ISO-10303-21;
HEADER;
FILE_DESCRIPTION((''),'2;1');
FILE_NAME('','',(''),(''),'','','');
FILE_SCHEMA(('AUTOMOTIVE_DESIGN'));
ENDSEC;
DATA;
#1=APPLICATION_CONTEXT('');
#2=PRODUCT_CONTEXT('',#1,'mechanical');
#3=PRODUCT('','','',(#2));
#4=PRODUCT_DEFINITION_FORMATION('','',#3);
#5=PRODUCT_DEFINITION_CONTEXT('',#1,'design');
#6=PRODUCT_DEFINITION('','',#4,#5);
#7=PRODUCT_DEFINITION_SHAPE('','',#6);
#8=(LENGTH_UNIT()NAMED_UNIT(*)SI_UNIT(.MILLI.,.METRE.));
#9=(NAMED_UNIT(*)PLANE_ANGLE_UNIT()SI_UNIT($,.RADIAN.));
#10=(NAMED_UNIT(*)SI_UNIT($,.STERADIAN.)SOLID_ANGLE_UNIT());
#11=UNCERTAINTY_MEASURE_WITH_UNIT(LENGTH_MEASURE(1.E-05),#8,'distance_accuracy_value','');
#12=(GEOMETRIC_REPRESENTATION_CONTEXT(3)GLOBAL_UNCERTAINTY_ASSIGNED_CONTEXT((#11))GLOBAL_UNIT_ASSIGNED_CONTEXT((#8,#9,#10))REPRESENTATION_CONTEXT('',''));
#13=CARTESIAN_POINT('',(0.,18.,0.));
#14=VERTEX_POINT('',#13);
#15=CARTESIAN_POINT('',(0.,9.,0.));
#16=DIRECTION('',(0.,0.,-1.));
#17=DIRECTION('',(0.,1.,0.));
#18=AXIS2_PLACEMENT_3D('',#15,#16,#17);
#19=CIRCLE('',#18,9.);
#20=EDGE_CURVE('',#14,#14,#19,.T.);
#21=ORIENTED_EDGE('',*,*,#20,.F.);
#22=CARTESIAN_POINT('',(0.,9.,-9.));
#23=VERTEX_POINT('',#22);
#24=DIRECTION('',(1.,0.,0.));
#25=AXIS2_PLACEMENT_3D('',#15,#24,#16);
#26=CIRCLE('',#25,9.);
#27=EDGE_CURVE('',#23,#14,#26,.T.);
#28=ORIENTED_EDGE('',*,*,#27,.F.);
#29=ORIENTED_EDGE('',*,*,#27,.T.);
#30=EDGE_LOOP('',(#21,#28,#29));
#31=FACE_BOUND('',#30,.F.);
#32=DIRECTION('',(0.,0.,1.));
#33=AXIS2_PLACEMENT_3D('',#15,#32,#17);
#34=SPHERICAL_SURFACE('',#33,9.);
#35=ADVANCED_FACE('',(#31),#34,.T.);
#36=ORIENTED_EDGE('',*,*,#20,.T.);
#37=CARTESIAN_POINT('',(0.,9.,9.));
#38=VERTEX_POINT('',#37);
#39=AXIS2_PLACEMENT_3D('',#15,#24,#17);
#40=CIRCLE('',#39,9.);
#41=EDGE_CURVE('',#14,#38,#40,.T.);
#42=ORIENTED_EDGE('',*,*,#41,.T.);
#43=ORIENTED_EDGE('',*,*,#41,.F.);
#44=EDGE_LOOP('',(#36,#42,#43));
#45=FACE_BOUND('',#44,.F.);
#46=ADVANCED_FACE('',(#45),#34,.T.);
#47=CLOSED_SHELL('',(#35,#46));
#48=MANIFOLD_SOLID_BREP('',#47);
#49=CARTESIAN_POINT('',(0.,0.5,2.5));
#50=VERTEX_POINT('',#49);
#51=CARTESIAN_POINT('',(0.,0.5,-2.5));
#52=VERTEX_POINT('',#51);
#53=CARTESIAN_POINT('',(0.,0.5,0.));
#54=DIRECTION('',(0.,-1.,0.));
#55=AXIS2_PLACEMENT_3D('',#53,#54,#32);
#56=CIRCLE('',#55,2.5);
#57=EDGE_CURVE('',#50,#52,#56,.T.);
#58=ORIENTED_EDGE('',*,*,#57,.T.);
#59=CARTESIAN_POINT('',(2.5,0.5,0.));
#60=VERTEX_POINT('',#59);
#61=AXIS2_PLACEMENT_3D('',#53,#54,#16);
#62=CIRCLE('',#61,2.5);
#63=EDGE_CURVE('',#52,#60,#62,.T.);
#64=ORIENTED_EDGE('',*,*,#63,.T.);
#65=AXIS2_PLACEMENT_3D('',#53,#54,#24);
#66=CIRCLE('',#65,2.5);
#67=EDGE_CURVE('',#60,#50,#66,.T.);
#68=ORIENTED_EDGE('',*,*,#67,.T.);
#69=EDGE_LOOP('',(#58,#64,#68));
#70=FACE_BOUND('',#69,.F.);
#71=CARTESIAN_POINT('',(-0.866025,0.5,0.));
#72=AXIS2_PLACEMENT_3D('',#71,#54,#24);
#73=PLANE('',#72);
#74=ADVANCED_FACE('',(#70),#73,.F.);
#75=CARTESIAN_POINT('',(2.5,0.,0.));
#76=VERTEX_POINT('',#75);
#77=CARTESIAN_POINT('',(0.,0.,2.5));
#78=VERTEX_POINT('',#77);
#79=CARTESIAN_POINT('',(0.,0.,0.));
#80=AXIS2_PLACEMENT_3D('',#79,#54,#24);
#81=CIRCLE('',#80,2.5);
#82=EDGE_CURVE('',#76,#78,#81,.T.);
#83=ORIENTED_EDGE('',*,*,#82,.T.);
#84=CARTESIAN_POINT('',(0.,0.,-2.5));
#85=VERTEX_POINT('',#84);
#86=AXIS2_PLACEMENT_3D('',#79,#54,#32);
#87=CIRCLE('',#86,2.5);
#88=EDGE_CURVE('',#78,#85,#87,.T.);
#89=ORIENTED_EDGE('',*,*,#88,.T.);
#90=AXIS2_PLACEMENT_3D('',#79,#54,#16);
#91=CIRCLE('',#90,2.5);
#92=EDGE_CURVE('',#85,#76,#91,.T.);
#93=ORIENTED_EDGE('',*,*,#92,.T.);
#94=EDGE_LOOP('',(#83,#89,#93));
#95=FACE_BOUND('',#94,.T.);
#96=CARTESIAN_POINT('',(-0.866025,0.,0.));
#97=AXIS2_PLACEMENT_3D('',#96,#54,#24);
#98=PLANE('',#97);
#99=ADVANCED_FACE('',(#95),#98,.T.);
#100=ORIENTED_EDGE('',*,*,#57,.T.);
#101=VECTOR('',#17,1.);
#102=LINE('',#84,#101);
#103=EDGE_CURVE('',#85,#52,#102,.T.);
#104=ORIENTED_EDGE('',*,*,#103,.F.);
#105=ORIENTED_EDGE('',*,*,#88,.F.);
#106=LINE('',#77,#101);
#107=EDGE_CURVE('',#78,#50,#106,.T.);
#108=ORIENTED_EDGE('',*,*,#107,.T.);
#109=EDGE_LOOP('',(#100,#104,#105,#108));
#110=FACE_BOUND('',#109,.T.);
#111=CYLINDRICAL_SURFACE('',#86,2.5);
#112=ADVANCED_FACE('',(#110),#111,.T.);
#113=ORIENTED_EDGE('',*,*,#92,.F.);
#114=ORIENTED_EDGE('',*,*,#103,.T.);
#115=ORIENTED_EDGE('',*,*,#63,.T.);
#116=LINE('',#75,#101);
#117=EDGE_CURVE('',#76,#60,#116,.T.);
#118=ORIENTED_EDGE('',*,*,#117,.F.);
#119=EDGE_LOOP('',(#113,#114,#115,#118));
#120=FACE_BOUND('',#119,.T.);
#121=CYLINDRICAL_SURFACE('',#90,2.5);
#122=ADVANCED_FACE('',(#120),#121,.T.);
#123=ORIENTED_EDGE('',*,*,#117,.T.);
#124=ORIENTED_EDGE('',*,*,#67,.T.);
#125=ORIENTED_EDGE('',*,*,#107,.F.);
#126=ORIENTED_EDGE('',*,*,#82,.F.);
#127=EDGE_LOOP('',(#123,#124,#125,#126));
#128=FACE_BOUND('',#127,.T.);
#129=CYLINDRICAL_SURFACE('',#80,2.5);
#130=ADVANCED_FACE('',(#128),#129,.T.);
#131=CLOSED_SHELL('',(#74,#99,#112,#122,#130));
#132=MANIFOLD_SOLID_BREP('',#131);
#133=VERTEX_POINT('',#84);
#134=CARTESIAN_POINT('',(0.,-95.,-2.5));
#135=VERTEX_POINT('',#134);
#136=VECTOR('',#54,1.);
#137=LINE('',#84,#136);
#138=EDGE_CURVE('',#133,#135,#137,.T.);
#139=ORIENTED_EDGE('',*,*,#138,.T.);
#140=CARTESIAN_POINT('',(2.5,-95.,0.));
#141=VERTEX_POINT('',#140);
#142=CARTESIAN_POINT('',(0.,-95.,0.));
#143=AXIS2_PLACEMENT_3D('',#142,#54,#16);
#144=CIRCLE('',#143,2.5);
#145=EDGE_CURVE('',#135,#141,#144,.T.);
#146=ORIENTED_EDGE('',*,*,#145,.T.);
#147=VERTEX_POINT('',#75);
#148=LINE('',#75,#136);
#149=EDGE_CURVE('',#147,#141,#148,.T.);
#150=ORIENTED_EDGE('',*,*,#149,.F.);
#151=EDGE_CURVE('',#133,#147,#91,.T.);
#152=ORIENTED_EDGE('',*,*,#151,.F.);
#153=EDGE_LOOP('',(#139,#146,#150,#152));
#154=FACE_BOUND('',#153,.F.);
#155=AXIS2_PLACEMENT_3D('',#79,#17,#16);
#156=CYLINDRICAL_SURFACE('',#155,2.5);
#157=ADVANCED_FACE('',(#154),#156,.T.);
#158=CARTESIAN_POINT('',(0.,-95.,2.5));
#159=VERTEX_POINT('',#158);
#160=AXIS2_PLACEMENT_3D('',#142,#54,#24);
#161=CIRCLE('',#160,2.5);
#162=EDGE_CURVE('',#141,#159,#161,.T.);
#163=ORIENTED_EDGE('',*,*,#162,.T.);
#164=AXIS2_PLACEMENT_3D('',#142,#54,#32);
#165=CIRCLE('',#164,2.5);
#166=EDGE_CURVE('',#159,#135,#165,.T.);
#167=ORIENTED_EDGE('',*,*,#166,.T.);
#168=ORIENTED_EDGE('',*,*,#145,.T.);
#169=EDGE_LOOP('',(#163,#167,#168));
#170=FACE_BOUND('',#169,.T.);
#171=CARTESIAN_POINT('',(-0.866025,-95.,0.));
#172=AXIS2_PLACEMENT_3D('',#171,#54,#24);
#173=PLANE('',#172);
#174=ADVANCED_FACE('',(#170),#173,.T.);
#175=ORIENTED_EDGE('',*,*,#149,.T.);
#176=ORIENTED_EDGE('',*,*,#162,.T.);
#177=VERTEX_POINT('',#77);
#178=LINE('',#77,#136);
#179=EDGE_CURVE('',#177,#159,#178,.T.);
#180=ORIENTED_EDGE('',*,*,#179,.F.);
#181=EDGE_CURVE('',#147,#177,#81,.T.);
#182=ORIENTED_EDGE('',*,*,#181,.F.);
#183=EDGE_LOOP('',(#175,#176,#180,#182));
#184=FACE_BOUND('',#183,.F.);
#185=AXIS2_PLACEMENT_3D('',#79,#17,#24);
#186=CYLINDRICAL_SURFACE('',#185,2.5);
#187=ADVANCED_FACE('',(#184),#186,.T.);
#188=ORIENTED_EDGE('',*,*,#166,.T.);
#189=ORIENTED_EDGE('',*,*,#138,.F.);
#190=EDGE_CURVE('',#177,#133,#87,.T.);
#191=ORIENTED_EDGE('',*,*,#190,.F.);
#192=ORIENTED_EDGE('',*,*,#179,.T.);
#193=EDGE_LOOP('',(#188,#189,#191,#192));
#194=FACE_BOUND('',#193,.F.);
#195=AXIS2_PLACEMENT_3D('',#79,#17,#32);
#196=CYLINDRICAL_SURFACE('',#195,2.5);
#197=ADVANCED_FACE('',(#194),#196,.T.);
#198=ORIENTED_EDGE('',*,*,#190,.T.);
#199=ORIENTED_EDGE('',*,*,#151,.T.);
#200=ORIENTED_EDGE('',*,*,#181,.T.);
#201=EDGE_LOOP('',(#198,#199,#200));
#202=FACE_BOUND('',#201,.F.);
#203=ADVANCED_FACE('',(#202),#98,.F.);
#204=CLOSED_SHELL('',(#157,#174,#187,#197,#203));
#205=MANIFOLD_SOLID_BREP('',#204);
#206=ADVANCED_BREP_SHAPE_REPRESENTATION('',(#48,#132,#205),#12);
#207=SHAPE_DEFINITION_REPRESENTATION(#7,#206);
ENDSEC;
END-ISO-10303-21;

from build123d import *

# Parameters (mm, degrees)
F1_DEPTH = 95
F5_DEPTH = 0.5


with BuildPart() as f1:
    # F0 (on Front) → F1 (new body)
    with BuildSketch(Plane.XZ):
        with BuildLine():
            Line((0, -2.5), (0, 2.5))
            ThreePointArc((0, 2.5), (-2.5, 0), (0, -2.5))
        make_face()
        with BuildLine():
            ThreePointArc((0, -2.5), (1.767766953, -1.767766953), (2.5, 0))
            ThreePointArc((2.5, 0), (1.767766953, 1.767766953), (0, 2.5))
            Line((0, 2.5), (0, -2.5))
        make_face()
    extrude(amount=F1_DEPTH)


with BuildPart() as f4:
    # F3 (on face) → F4 (revolve)
    with BuildSketch(Plane.YZ):
        with BuildLine():
            ThreePointArc((9, -9), (15.3639610307, -6.3639610307), (18, 0))
            ThreePointArc((18, 0), (15.3639610307, 6.3639610307), (9, 9))
            Line((9, 9), (9, 2.5))
            Line((9, 2.5), (9, 0))
            Line((9, 0), (9, -2.5))
            Line((9, -2.5), (9, -9))
        make_face()
    revolve(axis=Axis((0, 9, 0), (0, 0, -1)))


with BuildPart() as f5:
    # F5 (new): a face of the model
    f5_faces = [f1.part.faces().sort_by_distance(p)[0] for p in [
        (0, 0, 0),
    ]]
    extrude(f5_faces, amount=F5_DEPTH)


solid = Compound([f1.part, f4.part, f5.part])
